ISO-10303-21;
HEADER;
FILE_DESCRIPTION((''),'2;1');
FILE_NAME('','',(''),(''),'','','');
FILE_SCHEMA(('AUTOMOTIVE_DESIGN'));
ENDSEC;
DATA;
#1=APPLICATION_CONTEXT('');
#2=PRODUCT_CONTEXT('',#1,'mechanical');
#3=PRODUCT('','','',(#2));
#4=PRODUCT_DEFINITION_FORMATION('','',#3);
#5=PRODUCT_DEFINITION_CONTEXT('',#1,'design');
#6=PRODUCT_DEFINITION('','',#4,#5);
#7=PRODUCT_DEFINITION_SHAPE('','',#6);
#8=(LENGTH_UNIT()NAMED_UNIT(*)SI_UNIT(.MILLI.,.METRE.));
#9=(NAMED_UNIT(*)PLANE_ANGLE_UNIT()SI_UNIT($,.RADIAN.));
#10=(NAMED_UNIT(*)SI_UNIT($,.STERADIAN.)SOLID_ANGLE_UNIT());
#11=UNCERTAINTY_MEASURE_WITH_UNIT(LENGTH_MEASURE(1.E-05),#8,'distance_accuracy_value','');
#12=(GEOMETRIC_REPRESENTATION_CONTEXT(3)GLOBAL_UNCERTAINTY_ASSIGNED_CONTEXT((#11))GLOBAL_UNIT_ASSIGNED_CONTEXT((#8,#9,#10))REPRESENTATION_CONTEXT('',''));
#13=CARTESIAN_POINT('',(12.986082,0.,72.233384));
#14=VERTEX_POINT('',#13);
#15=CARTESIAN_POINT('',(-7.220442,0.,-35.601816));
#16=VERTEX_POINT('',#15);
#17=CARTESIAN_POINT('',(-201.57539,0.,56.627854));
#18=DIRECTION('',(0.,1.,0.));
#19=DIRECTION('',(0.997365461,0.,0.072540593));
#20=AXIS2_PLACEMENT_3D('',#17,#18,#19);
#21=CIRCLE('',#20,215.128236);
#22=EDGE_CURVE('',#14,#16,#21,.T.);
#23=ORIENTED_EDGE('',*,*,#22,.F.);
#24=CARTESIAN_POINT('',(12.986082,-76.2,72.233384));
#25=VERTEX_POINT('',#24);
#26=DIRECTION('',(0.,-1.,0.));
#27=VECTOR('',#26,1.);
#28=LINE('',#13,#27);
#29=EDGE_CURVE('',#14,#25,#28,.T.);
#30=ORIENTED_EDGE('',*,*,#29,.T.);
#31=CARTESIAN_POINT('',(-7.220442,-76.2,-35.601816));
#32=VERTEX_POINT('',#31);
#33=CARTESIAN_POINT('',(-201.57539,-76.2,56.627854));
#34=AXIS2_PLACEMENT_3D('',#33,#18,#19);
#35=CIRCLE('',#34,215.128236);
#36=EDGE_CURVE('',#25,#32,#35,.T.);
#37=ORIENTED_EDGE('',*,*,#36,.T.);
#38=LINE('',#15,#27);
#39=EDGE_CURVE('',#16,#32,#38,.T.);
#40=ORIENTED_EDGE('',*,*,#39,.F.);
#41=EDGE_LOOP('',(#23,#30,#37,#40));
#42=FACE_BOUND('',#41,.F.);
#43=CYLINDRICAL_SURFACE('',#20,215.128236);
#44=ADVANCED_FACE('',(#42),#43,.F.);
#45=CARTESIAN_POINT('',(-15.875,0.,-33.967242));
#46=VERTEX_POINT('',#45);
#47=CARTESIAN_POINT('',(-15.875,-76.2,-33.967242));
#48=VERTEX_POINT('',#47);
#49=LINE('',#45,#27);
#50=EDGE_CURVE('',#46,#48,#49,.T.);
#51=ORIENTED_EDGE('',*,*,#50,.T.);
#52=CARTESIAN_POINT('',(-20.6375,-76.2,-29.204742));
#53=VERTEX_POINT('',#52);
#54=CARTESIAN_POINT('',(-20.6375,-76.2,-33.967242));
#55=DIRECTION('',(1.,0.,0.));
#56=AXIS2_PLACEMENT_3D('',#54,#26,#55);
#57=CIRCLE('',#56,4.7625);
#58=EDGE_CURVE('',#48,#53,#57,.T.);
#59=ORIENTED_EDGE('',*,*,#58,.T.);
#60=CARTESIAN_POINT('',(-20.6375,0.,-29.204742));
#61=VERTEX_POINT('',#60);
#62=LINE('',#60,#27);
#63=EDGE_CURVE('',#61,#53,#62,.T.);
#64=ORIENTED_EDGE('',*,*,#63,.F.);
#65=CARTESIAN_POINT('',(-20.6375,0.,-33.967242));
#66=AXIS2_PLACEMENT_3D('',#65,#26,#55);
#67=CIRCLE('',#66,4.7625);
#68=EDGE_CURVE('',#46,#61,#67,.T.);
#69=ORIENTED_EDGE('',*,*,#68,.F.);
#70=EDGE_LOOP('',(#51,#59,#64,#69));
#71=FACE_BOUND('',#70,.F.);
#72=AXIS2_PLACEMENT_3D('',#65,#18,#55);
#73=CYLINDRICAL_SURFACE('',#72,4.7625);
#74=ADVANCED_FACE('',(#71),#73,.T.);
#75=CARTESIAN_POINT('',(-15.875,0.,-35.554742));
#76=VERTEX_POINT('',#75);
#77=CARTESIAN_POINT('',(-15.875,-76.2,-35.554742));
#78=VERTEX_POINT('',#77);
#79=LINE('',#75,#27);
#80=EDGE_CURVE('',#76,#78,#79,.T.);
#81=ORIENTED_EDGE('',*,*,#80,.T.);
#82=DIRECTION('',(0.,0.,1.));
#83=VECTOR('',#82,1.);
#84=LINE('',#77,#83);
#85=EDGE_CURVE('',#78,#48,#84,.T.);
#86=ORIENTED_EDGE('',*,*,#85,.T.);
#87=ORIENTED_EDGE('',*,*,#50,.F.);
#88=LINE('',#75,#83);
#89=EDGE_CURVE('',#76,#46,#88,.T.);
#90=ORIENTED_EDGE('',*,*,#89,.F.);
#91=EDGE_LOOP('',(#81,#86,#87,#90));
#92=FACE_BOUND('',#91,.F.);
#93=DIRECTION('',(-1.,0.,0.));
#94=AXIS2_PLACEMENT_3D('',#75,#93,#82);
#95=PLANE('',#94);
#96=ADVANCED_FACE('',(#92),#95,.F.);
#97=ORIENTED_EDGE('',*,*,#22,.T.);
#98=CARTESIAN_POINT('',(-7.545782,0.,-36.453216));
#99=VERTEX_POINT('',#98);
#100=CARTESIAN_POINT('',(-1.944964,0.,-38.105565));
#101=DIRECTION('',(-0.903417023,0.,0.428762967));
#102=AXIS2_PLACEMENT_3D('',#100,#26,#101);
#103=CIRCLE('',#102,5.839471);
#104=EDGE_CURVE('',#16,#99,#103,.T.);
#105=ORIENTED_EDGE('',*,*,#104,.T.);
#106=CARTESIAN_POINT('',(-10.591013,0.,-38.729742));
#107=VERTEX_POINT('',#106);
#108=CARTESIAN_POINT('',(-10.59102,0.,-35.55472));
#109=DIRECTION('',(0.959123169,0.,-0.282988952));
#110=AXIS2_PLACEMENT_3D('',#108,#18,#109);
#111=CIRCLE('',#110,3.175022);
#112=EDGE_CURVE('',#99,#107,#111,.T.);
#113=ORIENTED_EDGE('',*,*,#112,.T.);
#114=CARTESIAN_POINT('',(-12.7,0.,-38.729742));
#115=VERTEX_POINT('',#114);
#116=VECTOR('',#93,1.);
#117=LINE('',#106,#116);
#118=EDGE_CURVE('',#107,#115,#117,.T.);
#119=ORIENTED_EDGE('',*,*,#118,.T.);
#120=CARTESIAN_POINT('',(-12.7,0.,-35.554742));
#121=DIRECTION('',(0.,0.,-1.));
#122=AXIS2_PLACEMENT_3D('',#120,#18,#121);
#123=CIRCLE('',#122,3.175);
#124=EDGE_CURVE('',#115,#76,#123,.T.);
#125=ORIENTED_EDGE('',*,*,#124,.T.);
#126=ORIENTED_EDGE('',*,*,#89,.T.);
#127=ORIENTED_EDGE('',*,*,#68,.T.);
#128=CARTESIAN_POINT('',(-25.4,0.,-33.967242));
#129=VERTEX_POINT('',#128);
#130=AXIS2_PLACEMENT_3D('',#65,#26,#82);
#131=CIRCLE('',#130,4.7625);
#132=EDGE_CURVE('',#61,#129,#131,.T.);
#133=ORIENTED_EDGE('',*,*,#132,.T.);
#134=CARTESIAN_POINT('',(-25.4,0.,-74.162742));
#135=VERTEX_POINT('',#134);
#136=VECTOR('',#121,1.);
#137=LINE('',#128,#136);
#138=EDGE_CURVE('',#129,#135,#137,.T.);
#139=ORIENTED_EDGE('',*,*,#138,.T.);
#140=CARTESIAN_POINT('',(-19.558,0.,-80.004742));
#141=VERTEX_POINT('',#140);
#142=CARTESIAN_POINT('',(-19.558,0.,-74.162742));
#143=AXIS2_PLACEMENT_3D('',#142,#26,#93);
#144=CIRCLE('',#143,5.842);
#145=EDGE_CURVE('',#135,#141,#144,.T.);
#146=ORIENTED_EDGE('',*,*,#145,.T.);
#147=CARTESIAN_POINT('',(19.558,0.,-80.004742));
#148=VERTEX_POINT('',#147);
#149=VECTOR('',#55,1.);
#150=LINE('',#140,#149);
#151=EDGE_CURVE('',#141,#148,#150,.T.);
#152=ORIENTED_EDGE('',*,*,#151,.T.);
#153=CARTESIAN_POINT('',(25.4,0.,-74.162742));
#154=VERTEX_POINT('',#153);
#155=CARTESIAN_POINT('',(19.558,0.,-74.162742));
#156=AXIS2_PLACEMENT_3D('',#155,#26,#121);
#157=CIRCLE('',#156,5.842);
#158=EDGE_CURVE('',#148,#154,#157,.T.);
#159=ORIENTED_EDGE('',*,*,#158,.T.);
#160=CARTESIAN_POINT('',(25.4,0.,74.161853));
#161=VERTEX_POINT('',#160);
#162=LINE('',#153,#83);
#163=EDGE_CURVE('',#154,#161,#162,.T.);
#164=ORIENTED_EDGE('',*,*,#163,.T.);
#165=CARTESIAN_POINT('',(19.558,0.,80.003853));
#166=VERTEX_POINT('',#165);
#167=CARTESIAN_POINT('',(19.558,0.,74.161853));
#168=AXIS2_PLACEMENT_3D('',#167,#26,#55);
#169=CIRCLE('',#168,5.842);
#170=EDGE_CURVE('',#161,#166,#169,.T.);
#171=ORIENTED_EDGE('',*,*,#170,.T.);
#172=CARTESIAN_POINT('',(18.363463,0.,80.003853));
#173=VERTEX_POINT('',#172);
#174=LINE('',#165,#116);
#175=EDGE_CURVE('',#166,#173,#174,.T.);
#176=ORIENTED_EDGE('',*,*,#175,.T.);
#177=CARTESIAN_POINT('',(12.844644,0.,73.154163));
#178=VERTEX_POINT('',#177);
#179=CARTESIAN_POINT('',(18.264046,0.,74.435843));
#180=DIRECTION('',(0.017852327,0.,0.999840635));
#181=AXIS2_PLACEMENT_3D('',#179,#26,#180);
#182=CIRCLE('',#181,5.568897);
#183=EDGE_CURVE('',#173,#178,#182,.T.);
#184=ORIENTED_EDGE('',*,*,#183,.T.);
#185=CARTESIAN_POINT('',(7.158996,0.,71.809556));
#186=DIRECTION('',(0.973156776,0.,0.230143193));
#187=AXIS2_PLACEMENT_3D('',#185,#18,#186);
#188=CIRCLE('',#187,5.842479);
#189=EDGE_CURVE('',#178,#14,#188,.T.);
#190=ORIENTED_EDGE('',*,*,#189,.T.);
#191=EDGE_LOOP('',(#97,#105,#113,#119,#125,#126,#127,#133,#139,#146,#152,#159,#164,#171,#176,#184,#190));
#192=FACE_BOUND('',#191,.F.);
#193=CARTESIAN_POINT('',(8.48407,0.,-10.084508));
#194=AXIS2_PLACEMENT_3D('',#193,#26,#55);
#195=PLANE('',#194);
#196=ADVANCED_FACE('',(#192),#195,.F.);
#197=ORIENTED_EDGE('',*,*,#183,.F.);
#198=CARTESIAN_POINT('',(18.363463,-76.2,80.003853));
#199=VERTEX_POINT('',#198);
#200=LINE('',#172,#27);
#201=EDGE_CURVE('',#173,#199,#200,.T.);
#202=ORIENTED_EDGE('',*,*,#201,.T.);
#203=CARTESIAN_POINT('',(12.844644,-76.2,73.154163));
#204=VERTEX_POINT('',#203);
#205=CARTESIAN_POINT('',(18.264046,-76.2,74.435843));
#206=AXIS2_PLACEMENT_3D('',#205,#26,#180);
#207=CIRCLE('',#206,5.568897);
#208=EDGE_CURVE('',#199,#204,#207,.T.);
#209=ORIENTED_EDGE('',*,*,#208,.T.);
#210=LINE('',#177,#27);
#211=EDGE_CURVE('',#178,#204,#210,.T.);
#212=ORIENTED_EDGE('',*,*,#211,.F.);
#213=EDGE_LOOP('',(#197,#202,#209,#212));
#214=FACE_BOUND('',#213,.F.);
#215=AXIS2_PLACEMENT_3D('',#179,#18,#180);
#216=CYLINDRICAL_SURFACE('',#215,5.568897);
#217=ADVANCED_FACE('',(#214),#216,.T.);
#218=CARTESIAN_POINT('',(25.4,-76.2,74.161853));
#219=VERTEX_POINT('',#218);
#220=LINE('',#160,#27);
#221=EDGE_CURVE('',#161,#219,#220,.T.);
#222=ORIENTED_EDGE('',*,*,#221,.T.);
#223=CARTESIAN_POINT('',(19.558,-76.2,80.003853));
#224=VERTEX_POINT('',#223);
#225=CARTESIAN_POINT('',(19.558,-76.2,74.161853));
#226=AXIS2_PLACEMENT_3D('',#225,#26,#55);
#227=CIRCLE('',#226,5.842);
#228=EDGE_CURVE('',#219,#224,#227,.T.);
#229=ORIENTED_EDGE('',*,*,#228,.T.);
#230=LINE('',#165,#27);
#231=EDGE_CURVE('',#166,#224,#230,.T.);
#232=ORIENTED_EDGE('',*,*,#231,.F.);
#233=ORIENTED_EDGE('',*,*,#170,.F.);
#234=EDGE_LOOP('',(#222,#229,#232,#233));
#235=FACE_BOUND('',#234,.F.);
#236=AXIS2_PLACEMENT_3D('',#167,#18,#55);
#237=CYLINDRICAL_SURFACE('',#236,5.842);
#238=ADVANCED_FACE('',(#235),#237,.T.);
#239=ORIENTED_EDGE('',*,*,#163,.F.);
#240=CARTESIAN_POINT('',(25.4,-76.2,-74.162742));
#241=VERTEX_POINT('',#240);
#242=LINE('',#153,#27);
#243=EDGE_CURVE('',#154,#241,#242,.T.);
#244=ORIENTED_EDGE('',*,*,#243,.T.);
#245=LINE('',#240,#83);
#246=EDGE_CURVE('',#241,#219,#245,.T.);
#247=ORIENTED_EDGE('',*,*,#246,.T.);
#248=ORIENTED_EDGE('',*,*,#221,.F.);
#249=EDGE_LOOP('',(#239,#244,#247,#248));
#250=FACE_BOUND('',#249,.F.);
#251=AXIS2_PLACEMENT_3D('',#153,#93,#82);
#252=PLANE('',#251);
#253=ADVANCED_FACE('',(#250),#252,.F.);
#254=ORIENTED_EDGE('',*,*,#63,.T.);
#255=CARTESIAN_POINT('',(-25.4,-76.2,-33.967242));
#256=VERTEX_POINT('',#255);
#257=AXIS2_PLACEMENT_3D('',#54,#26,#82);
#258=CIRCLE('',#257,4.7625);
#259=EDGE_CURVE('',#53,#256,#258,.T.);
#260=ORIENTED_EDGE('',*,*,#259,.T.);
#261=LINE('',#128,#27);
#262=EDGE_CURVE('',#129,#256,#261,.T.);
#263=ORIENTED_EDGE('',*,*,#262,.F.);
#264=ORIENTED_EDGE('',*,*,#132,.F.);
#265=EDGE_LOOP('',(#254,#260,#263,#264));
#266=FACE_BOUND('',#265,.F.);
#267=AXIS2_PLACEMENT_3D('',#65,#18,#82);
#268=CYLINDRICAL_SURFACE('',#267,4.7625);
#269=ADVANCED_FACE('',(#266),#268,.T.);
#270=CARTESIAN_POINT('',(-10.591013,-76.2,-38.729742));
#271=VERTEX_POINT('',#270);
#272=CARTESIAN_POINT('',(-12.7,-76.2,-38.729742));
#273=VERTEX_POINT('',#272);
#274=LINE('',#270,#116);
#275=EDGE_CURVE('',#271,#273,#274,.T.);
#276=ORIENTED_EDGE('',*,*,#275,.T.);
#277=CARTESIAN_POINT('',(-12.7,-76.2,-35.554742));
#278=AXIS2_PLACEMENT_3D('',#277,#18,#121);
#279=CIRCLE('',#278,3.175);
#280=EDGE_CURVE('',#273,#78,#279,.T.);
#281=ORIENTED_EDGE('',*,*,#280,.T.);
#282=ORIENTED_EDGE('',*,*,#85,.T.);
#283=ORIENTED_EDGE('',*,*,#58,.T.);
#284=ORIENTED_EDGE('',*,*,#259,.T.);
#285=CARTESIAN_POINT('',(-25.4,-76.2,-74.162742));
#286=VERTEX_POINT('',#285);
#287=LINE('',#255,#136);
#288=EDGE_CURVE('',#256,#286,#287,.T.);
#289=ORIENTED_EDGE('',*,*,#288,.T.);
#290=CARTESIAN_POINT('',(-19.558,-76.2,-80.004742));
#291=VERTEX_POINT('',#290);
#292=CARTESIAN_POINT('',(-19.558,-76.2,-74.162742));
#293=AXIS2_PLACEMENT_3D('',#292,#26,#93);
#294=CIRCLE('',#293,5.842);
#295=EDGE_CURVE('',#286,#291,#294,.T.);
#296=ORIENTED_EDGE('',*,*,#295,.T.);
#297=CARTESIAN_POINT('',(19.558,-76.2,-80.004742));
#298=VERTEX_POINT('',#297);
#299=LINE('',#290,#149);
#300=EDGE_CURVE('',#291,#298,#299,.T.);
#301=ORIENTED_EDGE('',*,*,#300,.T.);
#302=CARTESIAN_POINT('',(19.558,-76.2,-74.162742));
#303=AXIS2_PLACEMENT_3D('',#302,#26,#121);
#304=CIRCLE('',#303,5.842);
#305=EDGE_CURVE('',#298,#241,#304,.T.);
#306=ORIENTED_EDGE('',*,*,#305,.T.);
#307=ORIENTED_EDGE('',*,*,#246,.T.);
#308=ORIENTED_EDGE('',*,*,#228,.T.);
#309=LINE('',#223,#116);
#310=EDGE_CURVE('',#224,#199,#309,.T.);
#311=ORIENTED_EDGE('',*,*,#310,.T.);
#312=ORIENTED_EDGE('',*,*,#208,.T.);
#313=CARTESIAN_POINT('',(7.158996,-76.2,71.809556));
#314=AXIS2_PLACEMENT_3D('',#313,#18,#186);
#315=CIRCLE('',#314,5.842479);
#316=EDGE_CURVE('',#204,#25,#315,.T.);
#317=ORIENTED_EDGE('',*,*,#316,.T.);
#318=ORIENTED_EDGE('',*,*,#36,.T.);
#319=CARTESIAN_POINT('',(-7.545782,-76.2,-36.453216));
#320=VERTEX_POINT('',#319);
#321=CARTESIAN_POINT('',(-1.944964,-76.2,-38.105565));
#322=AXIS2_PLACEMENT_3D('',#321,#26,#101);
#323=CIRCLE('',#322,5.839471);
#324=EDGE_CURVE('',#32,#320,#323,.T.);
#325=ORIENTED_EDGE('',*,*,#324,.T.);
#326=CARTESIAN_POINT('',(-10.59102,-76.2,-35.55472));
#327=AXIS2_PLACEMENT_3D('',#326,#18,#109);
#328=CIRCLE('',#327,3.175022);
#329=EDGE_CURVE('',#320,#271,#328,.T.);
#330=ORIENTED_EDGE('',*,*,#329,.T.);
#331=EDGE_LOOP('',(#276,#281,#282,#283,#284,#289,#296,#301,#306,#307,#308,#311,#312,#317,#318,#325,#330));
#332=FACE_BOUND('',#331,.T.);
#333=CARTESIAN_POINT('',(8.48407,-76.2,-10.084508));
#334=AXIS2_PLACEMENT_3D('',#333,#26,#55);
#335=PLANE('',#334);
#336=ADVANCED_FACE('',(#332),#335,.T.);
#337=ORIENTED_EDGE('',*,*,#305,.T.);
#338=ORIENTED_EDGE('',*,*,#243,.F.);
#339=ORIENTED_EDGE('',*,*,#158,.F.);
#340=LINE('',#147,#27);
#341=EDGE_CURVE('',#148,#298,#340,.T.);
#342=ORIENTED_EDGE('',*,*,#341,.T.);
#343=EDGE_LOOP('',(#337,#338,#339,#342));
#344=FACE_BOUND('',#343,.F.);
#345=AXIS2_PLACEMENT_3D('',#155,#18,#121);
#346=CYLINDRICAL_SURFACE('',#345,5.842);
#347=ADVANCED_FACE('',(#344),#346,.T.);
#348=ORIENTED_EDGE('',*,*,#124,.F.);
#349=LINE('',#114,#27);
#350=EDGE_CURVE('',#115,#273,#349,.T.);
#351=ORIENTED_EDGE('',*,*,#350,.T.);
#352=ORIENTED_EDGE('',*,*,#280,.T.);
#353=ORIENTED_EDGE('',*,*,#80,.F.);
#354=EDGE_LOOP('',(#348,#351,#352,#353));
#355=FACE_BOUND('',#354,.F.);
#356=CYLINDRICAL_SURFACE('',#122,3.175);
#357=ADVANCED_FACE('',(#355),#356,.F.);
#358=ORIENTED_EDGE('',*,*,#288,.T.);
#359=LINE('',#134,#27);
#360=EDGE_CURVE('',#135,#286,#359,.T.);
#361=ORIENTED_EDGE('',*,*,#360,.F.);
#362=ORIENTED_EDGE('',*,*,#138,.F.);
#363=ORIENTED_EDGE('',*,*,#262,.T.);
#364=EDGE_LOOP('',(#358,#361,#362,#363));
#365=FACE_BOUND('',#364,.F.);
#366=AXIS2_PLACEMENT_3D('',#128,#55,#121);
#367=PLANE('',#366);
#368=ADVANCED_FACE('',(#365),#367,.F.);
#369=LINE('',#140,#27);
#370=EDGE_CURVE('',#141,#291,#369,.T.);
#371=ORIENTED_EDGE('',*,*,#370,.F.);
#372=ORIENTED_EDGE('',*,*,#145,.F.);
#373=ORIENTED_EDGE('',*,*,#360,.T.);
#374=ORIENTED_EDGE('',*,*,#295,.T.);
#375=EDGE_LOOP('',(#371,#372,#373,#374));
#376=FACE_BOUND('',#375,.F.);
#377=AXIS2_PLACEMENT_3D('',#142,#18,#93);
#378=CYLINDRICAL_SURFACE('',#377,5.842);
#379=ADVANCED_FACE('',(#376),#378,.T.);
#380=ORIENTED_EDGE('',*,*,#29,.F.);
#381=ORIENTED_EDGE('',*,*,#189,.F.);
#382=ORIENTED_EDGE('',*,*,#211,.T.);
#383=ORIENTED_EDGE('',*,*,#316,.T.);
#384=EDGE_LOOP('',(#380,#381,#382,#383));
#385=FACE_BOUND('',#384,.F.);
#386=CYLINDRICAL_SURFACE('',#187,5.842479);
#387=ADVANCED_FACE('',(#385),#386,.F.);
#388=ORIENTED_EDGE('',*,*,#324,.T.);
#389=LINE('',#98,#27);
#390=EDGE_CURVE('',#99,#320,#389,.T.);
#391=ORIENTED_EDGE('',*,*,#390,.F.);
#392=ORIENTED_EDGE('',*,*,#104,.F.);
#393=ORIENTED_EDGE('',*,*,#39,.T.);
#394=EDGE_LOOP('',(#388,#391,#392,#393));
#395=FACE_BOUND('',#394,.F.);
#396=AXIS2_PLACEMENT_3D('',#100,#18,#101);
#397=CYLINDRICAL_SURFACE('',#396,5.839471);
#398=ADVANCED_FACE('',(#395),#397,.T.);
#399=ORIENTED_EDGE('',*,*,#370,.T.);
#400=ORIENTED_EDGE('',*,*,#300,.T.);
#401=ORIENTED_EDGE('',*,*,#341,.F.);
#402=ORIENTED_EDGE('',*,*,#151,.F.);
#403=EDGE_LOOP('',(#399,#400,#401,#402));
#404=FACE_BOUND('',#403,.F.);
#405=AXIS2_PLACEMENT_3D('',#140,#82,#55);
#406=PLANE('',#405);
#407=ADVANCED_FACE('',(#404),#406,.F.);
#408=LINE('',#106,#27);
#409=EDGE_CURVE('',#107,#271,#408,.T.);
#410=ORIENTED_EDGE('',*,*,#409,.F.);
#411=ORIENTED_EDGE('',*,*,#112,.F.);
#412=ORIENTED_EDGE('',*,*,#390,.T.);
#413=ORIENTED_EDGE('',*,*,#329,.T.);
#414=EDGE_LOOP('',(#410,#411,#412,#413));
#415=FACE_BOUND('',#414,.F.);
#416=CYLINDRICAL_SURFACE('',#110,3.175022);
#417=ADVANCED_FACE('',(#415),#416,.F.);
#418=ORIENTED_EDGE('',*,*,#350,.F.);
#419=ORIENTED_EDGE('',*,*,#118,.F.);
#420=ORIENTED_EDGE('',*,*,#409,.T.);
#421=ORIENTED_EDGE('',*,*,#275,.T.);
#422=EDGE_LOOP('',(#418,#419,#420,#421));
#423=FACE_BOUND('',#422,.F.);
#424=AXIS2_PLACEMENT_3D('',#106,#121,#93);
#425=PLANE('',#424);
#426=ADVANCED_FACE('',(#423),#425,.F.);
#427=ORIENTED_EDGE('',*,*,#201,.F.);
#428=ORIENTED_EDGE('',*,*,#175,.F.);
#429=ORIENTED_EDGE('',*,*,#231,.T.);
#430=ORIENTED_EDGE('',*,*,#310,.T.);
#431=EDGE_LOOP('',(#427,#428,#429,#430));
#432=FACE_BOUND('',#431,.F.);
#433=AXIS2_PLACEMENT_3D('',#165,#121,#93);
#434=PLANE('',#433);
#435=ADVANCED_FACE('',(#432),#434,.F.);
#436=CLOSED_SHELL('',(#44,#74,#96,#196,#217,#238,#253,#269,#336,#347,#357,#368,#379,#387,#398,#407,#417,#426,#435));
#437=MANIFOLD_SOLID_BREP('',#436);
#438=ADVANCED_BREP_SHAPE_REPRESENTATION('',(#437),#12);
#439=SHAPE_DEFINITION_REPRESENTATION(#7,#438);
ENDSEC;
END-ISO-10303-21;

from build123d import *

# Parameters (mm, degrees)
F1_DEPTH = 76.2


# Not quite as in the source:
# - ends of sketch curves that miss each other by under 0.0002 mm in the source are joined


with BuildPart() as f1:
    # F0 (on Front) → F1 (new body)
    with BuildSketch(Plane.XZ):
        with BuildLine():
            Line((-25.4, -33.9672422), (-25.4, -74.1627422))
            ThreePointArc((-25.4, -74.1627422), (-23.6889178157, -78.2936600157), (-19.558, -80.0047422))
            Line((-19.558, -80.0047422), (19.558, -80.0047422))
            ThreePointArc((19.558, -80.0047422), (23.6889178157, -78.2936600157), (25.4, -74.1627422))
            Line((25.4, -74.1627422), (25.4, 74.1618532))
            ThreePointArc((25.4, 74.1618532), (23.6889178157, 78.2927710157), (19.558, 80.0038532))
            Line((19.558, 80.0038532), (18.3634634, 80.0038532))
            ThreePointArc((18.3634634, 80.0038532), (13.9275587532, 77.9297664461), (12.844644278, 73.1541629443))
            ThreePointArc((12.844644278, 73.1541629443), (12.9337447112, 72.6965968013), (12.9860822326, 72.2333837478))
            ThreePointArc((12.9860822326, 72.2333837478), (9.8726352632, 17.0060097148), (-7.2204417887, -35.601816093))
            ThreePointArc((-7.2204417887, -35.601816093), (-7.3997485398, -36.0211585586), (-7.5457824697, -36.4532160254))
            ThreePointArc((-7.5457824697, -36.4532160254), (-8.6899630694, -38.0977002575), (-10.5910126, -38.7297422))
            Line((-10.5910126, -38.7297422), (-12.7, -38.7297422))
            ThreePointArc((-12.7, -38.7297422), (-14.9450640303, -37.7998062303), (-15.875, -35.5547422))
            Line((-15.875, -35.5547422), (-15.875, -33.9672422))
            ThreePointArc((-15.875, -33.9672422), (-17.2699039546, -30.5996461546), (-20.6375, -29.2047422))
            ThreePointArc((-20.6375, -29.2047422), (-24.0050960454, -30.5996461546), (-25.4, -33.9672422))
        make_face()
    extrude(amount=F1_DEPTH)


solid = f1.part
